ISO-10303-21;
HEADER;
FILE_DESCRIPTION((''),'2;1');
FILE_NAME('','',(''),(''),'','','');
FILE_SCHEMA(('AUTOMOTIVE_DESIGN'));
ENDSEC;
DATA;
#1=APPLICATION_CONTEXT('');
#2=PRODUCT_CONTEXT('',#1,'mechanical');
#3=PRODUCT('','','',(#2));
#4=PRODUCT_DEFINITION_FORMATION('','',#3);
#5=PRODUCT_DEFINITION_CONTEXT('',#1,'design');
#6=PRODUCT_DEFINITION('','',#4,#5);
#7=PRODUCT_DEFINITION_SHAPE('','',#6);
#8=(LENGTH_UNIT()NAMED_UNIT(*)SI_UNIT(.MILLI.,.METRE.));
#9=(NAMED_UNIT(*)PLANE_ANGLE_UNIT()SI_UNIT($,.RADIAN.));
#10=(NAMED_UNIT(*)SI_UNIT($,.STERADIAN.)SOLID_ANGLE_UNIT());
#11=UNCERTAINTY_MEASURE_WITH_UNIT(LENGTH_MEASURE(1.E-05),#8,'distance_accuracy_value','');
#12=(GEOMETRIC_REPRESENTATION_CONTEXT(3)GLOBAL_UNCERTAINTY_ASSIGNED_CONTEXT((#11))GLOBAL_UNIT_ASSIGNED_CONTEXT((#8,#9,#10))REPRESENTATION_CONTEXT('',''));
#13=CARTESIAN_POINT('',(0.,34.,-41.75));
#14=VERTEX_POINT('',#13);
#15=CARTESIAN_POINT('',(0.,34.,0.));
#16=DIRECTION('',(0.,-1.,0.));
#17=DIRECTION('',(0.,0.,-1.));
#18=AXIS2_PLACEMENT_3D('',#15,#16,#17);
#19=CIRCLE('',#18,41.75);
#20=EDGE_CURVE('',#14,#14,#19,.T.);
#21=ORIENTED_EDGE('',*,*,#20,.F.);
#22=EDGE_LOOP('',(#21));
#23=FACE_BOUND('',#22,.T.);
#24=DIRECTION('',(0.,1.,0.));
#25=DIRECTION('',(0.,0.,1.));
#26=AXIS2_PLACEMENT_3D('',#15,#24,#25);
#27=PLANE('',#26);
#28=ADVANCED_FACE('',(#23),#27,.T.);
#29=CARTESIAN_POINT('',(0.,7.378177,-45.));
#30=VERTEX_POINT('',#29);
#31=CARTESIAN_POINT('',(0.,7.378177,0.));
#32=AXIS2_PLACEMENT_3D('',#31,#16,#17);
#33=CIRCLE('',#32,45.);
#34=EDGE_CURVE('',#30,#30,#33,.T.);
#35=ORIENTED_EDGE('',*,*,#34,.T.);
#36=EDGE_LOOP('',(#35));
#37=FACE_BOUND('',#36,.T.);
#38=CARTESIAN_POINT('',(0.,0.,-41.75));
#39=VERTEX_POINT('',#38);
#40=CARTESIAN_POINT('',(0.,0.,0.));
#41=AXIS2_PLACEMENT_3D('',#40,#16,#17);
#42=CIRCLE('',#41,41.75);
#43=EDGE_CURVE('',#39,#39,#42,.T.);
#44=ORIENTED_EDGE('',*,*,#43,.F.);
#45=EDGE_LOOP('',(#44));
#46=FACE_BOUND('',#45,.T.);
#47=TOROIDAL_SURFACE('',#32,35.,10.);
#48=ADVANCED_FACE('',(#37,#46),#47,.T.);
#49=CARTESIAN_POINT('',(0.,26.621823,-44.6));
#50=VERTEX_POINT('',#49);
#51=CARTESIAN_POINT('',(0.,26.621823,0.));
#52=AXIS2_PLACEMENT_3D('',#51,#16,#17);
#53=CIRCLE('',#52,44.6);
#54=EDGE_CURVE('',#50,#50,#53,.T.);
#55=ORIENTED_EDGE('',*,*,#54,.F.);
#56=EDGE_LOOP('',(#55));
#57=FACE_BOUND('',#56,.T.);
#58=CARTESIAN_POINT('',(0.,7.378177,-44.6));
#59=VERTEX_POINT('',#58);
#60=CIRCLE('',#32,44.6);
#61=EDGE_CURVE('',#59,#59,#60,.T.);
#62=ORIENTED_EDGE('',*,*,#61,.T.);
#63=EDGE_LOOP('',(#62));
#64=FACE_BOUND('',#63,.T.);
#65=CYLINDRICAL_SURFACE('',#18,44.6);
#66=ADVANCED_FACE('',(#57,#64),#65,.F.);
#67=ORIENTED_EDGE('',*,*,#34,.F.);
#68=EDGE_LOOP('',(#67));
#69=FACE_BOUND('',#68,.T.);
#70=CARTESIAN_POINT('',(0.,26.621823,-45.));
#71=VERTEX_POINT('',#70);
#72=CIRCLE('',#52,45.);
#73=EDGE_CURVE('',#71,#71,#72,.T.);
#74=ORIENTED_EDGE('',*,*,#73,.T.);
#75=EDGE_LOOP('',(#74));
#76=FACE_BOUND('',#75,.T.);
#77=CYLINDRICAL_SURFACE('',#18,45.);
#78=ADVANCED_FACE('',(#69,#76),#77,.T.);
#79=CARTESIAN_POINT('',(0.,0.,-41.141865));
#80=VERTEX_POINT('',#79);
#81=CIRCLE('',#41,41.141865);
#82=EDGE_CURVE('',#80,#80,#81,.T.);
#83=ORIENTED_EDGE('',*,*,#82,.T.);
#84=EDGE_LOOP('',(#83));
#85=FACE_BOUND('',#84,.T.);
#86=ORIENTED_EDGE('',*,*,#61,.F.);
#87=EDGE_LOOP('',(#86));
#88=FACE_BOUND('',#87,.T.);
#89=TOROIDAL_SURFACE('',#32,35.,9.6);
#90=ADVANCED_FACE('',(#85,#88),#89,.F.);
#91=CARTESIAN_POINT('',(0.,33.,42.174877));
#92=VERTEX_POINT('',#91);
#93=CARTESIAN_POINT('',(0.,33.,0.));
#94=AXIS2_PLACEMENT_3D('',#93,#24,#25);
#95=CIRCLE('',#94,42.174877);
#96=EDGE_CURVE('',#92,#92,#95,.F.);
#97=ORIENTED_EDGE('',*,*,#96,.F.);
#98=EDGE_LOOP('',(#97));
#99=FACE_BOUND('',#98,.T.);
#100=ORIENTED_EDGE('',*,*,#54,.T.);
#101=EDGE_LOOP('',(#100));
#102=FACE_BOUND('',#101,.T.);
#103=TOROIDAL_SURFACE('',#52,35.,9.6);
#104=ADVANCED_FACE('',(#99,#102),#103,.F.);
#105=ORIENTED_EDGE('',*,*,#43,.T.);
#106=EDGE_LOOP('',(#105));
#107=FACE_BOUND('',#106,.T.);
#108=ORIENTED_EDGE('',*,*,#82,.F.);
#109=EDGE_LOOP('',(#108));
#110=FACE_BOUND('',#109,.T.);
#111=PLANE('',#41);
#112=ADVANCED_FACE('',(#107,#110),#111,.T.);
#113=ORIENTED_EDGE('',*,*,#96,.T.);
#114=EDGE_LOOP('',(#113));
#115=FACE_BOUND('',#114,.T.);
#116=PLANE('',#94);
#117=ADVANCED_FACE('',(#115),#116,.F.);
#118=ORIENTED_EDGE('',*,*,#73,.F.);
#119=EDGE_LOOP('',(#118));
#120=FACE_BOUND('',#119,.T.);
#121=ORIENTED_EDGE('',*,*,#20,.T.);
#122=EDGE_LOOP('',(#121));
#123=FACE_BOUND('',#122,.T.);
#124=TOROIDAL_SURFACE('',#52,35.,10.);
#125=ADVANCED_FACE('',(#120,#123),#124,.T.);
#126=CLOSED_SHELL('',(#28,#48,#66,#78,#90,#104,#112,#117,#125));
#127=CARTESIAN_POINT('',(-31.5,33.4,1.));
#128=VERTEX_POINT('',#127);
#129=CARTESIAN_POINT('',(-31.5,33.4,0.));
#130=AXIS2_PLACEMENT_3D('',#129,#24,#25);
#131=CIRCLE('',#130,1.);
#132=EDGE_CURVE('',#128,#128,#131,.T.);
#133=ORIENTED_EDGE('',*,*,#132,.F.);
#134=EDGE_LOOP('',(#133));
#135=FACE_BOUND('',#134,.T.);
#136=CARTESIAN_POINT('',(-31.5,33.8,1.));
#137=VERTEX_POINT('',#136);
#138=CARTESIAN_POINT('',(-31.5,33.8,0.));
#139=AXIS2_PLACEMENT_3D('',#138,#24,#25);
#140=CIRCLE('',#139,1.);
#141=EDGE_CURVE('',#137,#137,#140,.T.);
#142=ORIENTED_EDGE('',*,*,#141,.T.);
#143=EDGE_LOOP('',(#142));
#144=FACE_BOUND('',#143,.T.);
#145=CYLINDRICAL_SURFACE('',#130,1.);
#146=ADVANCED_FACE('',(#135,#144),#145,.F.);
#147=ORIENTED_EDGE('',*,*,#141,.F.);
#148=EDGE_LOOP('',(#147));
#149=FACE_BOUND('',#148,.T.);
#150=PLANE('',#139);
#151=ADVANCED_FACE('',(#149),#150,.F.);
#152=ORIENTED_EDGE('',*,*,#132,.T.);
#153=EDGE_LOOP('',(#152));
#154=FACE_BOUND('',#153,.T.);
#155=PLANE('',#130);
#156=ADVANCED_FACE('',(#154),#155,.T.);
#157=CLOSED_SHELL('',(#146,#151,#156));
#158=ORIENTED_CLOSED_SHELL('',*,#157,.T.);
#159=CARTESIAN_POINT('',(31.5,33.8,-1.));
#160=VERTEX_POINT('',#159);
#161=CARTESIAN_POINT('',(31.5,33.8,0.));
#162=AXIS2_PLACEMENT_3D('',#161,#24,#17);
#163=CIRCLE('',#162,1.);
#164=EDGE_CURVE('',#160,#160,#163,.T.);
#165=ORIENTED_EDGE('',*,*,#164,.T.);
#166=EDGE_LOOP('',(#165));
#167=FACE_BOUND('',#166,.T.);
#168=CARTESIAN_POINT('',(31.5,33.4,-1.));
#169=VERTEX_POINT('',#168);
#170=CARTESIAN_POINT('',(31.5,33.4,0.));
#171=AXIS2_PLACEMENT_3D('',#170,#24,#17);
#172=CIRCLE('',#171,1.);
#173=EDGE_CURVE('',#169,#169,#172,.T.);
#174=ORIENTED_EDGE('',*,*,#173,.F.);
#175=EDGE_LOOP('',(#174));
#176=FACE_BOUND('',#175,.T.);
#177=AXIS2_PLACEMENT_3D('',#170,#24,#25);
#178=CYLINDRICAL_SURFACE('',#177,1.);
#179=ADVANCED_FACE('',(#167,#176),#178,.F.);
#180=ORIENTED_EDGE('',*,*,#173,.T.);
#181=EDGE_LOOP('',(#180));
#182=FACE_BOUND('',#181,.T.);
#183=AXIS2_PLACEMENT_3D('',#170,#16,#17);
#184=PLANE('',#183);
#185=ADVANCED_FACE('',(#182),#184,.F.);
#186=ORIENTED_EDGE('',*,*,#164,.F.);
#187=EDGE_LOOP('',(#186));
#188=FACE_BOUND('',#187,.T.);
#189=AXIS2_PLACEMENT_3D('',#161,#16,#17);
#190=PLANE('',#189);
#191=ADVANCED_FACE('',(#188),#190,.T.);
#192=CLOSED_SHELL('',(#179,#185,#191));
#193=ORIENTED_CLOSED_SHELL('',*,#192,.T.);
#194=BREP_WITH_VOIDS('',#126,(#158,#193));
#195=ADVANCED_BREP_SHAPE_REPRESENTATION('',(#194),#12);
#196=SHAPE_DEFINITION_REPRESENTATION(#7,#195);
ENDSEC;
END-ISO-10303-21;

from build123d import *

# Parameters (mm, degrees)
ENL_V_START             = -0.2
ESQUISSE2_R             = 1
ENL_V_MAT_EXTRU_1_DEPTH = 0.4


# Read off the part's stored shape, not the designer's step: Coque1
with BuildPart() as part:
    # Esquisse1 → Révolution1 (revolve)
    with BuildSketch(Plane.XY, mode=Mode.PRIVATE) as r_volution1_sk:
        with BuildLine():
            Line((0, 0), (0, 34))
            Line((0, 34), (41.75, 34))
            ThreePointArc((41.75, 34), (44.151502609, 30.652951592), (45, 26.621822718))
            Line((45, 26.621822718), (45, 7.378177282))
            ThreePointArc((45, 7.378177282), (44.151502609, 3.347048408), (41.75, 0))
            Line((41.75, 0), (0, 0))
        make_face()
    revolve(r_volution1_sk.sketch.rotate(Axis((0, 34, 0), (0, 1, 0)), 90), axis=Axis((0, 34, 0), (0, 1, 0)))

    # Coque1 outline → Coque1 (revolve, cut)
    with BuildSketch(Plane.XY):
        with BuildLine():
            Line((44.6, 7.378177282), (44.6, 26.621822718))
            ThreePointArc((44.6, 26.621822718), (43.973260711, 30.033653928), (42.174876624, 33))
            Line((42.174876624, 33), (0, 33))
            Line((0, 33), (0, 0))
            Line((0, 0), (41.141864538, 0))
            ThreePointArc((41.141864538, 0), (43.692580157, 3.303984083), (44.6, 7.378177282))
        make_face()
    revolve(axis=Axis((0, 0, 0), (0, 1, 0)), mode=Mode.SUBTRACT)

    # Esquisse2 → Enlèv. mat.-Extru.1 (cut)
    with BuildSketch(Plane(origin=(0, 34, 0), x_dir=(1, 0, 0), z_dir=(0, 1, 0)).offset(ENL_V_START)):
        with Locations(Location((-31.5, 0, 0), (0, 0, 270))):
            Circle(ESQUISSE2_R)
        with Locations(Location((31.5, 0, 0), (0, 0, 90))):
            Circle(ESQUISSE2_R)
    extrude(amount=-ENL_V_MAT_EXTRU_1_DEPTH, mode=Mode.SUBTRACT)


solid = part.part
